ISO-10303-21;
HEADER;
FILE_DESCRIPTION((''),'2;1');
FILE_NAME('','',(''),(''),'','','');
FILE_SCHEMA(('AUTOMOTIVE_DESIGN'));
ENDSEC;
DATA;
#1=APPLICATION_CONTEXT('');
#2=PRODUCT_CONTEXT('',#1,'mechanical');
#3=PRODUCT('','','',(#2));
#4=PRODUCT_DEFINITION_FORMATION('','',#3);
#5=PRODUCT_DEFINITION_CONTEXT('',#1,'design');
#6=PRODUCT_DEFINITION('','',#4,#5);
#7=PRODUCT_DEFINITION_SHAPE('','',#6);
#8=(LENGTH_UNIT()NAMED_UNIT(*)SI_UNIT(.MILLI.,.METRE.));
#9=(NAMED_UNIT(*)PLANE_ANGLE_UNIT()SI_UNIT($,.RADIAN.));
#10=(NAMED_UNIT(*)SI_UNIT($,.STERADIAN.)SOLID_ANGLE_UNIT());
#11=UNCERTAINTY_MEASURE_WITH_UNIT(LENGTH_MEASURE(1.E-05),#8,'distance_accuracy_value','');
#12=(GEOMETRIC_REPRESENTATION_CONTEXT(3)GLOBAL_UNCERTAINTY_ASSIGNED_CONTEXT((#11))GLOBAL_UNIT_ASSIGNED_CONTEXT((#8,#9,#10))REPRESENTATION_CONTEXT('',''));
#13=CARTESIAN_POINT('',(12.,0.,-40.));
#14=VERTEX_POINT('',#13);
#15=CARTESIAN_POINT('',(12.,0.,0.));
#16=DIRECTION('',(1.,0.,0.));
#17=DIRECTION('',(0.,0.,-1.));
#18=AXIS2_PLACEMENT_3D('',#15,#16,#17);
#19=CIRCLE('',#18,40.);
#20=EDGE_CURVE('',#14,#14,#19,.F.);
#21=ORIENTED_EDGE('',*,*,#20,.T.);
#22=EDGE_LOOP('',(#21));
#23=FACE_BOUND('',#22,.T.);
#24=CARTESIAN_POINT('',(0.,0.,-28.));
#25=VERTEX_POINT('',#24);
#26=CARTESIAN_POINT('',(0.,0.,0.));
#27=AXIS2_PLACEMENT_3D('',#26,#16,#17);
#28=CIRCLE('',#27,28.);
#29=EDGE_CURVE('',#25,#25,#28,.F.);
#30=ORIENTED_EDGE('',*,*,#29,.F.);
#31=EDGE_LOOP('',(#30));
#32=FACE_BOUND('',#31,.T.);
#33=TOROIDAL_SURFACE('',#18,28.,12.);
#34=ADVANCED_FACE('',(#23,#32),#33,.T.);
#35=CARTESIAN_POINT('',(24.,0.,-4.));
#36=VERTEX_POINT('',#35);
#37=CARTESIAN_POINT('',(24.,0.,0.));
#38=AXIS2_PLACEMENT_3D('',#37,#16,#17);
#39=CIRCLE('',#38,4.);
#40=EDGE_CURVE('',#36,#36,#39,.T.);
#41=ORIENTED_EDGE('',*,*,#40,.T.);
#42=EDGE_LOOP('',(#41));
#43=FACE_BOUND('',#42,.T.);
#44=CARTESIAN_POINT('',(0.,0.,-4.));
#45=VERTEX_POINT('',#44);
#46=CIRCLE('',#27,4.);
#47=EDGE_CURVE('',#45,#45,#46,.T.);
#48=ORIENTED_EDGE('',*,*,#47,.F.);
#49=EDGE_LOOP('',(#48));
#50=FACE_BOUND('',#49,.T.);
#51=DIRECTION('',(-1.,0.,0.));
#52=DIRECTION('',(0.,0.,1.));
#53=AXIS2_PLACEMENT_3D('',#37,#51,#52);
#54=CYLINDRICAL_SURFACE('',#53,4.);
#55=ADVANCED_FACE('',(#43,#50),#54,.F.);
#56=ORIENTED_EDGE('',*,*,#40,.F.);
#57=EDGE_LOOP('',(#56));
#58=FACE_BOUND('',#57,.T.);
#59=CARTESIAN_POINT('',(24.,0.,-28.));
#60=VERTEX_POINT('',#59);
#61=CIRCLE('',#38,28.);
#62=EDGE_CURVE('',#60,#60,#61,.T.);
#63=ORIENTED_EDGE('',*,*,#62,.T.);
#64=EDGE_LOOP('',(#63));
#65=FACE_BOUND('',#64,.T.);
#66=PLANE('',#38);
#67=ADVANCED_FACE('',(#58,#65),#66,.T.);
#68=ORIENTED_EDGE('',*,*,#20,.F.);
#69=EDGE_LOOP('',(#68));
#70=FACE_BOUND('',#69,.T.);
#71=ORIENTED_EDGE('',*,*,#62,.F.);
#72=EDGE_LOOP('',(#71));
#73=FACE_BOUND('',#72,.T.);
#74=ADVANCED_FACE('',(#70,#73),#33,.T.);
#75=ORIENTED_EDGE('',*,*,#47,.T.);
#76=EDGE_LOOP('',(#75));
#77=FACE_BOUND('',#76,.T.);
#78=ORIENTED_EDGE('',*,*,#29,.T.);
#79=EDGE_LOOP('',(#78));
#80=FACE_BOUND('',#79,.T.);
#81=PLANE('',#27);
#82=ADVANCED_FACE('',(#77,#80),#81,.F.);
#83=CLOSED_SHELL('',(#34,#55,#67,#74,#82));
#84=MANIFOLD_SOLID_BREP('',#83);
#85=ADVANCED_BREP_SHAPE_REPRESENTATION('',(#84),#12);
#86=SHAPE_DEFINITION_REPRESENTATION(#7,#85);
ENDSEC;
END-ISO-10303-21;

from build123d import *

# Parameters (mm, degrees)
SKETCH1_R           = 40
SKETCH1_R_2         = 4
BOSS_EXTRUDE1_DEPTH = 24
FILLET1_R           = 12


with BuildPart() as part:
    # Sketch1 → Boss-Extrude1 (new body)
    with BuildSketch(Plane(origin=(0, 0, 0), x_dir=(0, 0, -1), z_dir=(1, 0, 0))):
        Circle(SKETCH1_R)
        Circle(SKETCH1_R_2, mode=Mode.SUBTRACT)
    extrude(amount=BOSS_EXTRUDE1_DEPTH)

    # Fillet1
    fillet1_edges = [part.edges().sort_by_distance(p)[0] for p in [
        (0, 0, 40),
        (24, 0, 40),
    ]]
    fillet(fillet1_edges, radius=FILLET1_R - 0.0001)  # a hair under: the kernel refuses the full size


solid = part.part
